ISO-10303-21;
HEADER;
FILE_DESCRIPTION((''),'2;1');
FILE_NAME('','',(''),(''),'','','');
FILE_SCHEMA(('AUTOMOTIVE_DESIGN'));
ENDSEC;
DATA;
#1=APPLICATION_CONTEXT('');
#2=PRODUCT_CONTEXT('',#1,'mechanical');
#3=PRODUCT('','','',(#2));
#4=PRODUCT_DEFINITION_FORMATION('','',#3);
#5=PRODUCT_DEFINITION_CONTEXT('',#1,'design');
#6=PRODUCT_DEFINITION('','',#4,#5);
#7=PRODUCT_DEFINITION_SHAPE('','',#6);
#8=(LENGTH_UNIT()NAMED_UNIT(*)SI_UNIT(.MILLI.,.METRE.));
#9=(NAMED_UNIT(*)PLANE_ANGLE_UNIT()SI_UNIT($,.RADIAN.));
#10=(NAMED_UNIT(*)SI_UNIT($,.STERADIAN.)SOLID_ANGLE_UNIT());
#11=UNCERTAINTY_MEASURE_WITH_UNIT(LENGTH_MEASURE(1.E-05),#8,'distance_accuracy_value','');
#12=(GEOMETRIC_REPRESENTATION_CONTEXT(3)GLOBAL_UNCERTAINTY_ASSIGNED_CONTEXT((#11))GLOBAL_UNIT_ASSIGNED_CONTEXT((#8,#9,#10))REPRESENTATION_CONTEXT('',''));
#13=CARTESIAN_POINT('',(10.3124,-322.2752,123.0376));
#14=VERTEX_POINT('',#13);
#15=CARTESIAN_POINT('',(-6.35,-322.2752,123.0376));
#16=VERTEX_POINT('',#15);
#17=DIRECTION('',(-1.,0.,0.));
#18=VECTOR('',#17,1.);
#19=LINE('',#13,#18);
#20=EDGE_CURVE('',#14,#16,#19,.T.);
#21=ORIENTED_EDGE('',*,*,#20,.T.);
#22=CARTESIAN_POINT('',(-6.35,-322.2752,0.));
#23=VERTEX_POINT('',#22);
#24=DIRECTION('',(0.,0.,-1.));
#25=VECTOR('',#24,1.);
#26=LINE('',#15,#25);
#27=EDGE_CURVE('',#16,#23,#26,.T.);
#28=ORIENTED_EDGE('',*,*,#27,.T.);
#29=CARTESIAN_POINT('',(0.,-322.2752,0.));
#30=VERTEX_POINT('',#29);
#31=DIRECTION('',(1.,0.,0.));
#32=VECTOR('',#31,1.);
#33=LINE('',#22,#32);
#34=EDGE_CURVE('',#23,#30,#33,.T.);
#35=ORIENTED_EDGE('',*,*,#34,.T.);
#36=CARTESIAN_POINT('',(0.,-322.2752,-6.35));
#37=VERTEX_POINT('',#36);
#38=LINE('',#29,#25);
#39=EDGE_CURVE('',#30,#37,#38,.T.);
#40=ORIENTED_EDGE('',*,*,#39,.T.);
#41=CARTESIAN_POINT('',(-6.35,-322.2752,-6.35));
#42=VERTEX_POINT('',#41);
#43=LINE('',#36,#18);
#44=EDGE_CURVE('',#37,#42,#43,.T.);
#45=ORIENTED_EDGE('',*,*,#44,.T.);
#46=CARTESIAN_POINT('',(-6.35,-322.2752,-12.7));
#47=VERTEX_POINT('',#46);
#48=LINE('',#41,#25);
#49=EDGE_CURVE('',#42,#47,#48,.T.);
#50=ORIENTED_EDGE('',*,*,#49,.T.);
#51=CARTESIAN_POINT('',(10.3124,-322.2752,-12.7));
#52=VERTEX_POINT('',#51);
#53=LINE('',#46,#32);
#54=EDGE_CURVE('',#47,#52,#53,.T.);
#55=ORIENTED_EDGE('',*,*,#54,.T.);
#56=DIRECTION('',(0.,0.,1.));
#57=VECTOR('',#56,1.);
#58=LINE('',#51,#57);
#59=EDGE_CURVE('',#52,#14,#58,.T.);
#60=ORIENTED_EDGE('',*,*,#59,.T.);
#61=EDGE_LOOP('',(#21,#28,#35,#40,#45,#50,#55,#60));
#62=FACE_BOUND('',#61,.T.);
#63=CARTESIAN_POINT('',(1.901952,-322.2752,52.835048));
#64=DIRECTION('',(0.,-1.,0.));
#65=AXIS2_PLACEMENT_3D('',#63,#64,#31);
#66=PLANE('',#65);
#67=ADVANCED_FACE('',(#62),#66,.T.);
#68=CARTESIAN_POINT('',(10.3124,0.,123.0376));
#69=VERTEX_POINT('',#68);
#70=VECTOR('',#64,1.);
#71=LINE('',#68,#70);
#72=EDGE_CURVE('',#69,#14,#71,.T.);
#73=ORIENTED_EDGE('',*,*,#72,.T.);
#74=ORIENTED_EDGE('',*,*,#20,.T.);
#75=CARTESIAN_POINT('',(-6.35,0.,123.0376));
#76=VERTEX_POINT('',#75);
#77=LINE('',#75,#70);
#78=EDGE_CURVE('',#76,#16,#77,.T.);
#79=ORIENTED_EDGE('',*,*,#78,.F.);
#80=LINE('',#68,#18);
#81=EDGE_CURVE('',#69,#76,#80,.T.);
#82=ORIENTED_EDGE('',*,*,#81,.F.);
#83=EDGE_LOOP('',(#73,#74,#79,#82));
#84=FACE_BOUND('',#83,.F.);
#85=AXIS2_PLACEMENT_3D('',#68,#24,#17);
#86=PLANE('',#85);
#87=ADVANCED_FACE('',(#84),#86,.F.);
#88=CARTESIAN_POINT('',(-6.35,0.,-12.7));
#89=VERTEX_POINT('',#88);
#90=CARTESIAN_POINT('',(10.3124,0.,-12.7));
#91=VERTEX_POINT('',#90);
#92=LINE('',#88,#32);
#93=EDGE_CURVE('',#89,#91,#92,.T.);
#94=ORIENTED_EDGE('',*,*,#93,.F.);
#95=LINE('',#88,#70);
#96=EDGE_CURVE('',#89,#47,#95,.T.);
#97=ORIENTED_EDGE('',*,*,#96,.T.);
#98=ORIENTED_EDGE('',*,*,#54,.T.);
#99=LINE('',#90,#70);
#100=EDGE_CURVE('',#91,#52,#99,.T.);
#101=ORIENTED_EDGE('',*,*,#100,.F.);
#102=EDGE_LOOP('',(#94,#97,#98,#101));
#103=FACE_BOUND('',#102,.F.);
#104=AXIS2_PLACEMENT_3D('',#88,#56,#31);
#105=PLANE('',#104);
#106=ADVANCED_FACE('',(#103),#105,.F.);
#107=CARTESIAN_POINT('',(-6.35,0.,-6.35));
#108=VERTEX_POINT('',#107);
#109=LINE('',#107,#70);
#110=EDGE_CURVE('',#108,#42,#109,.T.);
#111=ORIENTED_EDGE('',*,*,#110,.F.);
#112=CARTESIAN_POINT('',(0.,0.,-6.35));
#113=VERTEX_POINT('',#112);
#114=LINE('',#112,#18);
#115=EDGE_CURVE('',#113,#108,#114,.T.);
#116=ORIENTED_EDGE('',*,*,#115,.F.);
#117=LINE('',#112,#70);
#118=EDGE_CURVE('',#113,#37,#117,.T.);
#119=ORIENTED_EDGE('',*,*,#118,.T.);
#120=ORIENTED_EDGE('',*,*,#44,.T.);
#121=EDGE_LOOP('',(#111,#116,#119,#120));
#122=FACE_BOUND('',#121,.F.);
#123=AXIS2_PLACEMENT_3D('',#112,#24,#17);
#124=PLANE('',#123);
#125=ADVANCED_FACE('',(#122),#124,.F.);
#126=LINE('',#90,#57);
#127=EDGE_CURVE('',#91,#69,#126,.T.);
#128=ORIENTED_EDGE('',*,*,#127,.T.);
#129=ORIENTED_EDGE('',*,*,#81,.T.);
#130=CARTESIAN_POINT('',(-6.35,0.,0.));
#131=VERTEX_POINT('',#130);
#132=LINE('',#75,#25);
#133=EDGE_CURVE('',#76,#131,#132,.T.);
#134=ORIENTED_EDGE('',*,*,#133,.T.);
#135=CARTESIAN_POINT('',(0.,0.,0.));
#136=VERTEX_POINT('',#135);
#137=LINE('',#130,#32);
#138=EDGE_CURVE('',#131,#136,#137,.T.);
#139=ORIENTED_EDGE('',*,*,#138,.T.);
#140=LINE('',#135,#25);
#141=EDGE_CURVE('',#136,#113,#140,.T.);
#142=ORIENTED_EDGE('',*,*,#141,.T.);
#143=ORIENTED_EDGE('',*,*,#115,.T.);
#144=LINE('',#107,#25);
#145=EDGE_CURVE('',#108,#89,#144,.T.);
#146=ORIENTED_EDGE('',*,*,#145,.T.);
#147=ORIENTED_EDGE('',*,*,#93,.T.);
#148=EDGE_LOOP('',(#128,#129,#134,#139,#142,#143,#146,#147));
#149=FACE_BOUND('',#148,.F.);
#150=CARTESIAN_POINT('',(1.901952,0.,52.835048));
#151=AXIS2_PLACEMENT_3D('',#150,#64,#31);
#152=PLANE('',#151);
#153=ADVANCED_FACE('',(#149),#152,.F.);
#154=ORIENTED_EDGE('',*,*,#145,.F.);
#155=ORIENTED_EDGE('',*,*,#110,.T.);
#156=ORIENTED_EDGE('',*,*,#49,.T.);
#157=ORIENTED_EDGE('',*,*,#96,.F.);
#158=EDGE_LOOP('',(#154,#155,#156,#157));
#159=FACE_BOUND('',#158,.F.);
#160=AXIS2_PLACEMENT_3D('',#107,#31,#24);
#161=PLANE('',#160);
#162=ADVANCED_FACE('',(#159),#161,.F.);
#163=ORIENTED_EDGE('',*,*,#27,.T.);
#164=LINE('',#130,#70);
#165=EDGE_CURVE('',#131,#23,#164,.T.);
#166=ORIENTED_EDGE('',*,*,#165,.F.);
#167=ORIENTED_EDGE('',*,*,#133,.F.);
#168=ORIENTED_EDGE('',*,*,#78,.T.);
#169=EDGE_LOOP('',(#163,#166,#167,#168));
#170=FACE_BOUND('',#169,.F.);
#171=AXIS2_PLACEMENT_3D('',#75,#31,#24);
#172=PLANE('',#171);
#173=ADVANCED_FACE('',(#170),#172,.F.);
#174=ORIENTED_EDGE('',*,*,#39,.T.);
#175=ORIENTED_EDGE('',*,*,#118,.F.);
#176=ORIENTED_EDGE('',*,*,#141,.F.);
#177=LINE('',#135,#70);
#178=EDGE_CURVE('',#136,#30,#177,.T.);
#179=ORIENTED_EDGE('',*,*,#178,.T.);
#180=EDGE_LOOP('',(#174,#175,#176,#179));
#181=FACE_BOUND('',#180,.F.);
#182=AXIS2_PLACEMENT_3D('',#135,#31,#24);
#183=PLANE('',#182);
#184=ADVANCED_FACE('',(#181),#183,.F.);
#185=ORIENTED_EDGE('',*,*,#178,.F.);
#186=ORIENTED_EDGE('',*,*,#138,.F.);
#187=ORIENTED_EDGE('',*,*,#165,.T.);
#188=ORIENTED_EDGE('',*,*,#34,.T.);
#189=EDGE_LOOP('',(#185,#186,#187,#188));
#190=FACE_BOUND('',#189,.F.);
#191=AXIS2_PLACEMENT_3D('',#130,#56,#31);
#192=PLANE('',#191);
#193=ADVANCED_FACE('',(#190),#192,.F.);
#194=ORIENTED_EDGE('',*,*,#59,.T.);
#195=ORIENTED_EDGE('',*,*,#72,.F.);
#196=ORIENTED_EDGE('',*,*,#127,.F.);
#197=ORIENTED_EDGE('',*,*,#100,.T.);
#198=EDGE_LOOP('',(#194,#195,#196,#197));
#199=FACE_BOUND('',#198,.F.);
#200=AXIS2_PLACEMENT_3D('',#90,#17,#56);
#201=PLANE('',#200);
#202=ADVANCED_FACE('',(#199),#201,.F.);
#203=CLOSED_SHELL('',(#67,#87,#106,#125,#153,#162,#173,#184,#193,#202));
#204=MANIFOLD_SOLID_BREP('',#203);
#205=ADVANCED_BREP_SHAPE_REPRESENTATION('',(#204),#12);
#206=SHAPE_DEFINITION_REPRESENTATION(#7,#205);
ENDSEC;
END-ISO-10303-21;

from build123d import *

# Parameters (mm, degrees)
F3_DEPTH = 322.2752


# Not quite as in the source:
# - a variable given as a bare number and used for a length is read in inches; the dataset says mm whatever the document's units were


with BuildPart() as f3:
    # F2 (on Front) → F3 (new body)
    with BuildSketch(Plane.XZ):
        Polygon((10.3124, 123.0376), (-6.35, 123.0376), (-6.35, 0), (0, 0), (0, -6.35), (-6.35, -6.35), (-6.35, -12.7), (10.3124, -12.7), align=None)
    extrude(amount=F3_DEPTH)


solid = f3.part
